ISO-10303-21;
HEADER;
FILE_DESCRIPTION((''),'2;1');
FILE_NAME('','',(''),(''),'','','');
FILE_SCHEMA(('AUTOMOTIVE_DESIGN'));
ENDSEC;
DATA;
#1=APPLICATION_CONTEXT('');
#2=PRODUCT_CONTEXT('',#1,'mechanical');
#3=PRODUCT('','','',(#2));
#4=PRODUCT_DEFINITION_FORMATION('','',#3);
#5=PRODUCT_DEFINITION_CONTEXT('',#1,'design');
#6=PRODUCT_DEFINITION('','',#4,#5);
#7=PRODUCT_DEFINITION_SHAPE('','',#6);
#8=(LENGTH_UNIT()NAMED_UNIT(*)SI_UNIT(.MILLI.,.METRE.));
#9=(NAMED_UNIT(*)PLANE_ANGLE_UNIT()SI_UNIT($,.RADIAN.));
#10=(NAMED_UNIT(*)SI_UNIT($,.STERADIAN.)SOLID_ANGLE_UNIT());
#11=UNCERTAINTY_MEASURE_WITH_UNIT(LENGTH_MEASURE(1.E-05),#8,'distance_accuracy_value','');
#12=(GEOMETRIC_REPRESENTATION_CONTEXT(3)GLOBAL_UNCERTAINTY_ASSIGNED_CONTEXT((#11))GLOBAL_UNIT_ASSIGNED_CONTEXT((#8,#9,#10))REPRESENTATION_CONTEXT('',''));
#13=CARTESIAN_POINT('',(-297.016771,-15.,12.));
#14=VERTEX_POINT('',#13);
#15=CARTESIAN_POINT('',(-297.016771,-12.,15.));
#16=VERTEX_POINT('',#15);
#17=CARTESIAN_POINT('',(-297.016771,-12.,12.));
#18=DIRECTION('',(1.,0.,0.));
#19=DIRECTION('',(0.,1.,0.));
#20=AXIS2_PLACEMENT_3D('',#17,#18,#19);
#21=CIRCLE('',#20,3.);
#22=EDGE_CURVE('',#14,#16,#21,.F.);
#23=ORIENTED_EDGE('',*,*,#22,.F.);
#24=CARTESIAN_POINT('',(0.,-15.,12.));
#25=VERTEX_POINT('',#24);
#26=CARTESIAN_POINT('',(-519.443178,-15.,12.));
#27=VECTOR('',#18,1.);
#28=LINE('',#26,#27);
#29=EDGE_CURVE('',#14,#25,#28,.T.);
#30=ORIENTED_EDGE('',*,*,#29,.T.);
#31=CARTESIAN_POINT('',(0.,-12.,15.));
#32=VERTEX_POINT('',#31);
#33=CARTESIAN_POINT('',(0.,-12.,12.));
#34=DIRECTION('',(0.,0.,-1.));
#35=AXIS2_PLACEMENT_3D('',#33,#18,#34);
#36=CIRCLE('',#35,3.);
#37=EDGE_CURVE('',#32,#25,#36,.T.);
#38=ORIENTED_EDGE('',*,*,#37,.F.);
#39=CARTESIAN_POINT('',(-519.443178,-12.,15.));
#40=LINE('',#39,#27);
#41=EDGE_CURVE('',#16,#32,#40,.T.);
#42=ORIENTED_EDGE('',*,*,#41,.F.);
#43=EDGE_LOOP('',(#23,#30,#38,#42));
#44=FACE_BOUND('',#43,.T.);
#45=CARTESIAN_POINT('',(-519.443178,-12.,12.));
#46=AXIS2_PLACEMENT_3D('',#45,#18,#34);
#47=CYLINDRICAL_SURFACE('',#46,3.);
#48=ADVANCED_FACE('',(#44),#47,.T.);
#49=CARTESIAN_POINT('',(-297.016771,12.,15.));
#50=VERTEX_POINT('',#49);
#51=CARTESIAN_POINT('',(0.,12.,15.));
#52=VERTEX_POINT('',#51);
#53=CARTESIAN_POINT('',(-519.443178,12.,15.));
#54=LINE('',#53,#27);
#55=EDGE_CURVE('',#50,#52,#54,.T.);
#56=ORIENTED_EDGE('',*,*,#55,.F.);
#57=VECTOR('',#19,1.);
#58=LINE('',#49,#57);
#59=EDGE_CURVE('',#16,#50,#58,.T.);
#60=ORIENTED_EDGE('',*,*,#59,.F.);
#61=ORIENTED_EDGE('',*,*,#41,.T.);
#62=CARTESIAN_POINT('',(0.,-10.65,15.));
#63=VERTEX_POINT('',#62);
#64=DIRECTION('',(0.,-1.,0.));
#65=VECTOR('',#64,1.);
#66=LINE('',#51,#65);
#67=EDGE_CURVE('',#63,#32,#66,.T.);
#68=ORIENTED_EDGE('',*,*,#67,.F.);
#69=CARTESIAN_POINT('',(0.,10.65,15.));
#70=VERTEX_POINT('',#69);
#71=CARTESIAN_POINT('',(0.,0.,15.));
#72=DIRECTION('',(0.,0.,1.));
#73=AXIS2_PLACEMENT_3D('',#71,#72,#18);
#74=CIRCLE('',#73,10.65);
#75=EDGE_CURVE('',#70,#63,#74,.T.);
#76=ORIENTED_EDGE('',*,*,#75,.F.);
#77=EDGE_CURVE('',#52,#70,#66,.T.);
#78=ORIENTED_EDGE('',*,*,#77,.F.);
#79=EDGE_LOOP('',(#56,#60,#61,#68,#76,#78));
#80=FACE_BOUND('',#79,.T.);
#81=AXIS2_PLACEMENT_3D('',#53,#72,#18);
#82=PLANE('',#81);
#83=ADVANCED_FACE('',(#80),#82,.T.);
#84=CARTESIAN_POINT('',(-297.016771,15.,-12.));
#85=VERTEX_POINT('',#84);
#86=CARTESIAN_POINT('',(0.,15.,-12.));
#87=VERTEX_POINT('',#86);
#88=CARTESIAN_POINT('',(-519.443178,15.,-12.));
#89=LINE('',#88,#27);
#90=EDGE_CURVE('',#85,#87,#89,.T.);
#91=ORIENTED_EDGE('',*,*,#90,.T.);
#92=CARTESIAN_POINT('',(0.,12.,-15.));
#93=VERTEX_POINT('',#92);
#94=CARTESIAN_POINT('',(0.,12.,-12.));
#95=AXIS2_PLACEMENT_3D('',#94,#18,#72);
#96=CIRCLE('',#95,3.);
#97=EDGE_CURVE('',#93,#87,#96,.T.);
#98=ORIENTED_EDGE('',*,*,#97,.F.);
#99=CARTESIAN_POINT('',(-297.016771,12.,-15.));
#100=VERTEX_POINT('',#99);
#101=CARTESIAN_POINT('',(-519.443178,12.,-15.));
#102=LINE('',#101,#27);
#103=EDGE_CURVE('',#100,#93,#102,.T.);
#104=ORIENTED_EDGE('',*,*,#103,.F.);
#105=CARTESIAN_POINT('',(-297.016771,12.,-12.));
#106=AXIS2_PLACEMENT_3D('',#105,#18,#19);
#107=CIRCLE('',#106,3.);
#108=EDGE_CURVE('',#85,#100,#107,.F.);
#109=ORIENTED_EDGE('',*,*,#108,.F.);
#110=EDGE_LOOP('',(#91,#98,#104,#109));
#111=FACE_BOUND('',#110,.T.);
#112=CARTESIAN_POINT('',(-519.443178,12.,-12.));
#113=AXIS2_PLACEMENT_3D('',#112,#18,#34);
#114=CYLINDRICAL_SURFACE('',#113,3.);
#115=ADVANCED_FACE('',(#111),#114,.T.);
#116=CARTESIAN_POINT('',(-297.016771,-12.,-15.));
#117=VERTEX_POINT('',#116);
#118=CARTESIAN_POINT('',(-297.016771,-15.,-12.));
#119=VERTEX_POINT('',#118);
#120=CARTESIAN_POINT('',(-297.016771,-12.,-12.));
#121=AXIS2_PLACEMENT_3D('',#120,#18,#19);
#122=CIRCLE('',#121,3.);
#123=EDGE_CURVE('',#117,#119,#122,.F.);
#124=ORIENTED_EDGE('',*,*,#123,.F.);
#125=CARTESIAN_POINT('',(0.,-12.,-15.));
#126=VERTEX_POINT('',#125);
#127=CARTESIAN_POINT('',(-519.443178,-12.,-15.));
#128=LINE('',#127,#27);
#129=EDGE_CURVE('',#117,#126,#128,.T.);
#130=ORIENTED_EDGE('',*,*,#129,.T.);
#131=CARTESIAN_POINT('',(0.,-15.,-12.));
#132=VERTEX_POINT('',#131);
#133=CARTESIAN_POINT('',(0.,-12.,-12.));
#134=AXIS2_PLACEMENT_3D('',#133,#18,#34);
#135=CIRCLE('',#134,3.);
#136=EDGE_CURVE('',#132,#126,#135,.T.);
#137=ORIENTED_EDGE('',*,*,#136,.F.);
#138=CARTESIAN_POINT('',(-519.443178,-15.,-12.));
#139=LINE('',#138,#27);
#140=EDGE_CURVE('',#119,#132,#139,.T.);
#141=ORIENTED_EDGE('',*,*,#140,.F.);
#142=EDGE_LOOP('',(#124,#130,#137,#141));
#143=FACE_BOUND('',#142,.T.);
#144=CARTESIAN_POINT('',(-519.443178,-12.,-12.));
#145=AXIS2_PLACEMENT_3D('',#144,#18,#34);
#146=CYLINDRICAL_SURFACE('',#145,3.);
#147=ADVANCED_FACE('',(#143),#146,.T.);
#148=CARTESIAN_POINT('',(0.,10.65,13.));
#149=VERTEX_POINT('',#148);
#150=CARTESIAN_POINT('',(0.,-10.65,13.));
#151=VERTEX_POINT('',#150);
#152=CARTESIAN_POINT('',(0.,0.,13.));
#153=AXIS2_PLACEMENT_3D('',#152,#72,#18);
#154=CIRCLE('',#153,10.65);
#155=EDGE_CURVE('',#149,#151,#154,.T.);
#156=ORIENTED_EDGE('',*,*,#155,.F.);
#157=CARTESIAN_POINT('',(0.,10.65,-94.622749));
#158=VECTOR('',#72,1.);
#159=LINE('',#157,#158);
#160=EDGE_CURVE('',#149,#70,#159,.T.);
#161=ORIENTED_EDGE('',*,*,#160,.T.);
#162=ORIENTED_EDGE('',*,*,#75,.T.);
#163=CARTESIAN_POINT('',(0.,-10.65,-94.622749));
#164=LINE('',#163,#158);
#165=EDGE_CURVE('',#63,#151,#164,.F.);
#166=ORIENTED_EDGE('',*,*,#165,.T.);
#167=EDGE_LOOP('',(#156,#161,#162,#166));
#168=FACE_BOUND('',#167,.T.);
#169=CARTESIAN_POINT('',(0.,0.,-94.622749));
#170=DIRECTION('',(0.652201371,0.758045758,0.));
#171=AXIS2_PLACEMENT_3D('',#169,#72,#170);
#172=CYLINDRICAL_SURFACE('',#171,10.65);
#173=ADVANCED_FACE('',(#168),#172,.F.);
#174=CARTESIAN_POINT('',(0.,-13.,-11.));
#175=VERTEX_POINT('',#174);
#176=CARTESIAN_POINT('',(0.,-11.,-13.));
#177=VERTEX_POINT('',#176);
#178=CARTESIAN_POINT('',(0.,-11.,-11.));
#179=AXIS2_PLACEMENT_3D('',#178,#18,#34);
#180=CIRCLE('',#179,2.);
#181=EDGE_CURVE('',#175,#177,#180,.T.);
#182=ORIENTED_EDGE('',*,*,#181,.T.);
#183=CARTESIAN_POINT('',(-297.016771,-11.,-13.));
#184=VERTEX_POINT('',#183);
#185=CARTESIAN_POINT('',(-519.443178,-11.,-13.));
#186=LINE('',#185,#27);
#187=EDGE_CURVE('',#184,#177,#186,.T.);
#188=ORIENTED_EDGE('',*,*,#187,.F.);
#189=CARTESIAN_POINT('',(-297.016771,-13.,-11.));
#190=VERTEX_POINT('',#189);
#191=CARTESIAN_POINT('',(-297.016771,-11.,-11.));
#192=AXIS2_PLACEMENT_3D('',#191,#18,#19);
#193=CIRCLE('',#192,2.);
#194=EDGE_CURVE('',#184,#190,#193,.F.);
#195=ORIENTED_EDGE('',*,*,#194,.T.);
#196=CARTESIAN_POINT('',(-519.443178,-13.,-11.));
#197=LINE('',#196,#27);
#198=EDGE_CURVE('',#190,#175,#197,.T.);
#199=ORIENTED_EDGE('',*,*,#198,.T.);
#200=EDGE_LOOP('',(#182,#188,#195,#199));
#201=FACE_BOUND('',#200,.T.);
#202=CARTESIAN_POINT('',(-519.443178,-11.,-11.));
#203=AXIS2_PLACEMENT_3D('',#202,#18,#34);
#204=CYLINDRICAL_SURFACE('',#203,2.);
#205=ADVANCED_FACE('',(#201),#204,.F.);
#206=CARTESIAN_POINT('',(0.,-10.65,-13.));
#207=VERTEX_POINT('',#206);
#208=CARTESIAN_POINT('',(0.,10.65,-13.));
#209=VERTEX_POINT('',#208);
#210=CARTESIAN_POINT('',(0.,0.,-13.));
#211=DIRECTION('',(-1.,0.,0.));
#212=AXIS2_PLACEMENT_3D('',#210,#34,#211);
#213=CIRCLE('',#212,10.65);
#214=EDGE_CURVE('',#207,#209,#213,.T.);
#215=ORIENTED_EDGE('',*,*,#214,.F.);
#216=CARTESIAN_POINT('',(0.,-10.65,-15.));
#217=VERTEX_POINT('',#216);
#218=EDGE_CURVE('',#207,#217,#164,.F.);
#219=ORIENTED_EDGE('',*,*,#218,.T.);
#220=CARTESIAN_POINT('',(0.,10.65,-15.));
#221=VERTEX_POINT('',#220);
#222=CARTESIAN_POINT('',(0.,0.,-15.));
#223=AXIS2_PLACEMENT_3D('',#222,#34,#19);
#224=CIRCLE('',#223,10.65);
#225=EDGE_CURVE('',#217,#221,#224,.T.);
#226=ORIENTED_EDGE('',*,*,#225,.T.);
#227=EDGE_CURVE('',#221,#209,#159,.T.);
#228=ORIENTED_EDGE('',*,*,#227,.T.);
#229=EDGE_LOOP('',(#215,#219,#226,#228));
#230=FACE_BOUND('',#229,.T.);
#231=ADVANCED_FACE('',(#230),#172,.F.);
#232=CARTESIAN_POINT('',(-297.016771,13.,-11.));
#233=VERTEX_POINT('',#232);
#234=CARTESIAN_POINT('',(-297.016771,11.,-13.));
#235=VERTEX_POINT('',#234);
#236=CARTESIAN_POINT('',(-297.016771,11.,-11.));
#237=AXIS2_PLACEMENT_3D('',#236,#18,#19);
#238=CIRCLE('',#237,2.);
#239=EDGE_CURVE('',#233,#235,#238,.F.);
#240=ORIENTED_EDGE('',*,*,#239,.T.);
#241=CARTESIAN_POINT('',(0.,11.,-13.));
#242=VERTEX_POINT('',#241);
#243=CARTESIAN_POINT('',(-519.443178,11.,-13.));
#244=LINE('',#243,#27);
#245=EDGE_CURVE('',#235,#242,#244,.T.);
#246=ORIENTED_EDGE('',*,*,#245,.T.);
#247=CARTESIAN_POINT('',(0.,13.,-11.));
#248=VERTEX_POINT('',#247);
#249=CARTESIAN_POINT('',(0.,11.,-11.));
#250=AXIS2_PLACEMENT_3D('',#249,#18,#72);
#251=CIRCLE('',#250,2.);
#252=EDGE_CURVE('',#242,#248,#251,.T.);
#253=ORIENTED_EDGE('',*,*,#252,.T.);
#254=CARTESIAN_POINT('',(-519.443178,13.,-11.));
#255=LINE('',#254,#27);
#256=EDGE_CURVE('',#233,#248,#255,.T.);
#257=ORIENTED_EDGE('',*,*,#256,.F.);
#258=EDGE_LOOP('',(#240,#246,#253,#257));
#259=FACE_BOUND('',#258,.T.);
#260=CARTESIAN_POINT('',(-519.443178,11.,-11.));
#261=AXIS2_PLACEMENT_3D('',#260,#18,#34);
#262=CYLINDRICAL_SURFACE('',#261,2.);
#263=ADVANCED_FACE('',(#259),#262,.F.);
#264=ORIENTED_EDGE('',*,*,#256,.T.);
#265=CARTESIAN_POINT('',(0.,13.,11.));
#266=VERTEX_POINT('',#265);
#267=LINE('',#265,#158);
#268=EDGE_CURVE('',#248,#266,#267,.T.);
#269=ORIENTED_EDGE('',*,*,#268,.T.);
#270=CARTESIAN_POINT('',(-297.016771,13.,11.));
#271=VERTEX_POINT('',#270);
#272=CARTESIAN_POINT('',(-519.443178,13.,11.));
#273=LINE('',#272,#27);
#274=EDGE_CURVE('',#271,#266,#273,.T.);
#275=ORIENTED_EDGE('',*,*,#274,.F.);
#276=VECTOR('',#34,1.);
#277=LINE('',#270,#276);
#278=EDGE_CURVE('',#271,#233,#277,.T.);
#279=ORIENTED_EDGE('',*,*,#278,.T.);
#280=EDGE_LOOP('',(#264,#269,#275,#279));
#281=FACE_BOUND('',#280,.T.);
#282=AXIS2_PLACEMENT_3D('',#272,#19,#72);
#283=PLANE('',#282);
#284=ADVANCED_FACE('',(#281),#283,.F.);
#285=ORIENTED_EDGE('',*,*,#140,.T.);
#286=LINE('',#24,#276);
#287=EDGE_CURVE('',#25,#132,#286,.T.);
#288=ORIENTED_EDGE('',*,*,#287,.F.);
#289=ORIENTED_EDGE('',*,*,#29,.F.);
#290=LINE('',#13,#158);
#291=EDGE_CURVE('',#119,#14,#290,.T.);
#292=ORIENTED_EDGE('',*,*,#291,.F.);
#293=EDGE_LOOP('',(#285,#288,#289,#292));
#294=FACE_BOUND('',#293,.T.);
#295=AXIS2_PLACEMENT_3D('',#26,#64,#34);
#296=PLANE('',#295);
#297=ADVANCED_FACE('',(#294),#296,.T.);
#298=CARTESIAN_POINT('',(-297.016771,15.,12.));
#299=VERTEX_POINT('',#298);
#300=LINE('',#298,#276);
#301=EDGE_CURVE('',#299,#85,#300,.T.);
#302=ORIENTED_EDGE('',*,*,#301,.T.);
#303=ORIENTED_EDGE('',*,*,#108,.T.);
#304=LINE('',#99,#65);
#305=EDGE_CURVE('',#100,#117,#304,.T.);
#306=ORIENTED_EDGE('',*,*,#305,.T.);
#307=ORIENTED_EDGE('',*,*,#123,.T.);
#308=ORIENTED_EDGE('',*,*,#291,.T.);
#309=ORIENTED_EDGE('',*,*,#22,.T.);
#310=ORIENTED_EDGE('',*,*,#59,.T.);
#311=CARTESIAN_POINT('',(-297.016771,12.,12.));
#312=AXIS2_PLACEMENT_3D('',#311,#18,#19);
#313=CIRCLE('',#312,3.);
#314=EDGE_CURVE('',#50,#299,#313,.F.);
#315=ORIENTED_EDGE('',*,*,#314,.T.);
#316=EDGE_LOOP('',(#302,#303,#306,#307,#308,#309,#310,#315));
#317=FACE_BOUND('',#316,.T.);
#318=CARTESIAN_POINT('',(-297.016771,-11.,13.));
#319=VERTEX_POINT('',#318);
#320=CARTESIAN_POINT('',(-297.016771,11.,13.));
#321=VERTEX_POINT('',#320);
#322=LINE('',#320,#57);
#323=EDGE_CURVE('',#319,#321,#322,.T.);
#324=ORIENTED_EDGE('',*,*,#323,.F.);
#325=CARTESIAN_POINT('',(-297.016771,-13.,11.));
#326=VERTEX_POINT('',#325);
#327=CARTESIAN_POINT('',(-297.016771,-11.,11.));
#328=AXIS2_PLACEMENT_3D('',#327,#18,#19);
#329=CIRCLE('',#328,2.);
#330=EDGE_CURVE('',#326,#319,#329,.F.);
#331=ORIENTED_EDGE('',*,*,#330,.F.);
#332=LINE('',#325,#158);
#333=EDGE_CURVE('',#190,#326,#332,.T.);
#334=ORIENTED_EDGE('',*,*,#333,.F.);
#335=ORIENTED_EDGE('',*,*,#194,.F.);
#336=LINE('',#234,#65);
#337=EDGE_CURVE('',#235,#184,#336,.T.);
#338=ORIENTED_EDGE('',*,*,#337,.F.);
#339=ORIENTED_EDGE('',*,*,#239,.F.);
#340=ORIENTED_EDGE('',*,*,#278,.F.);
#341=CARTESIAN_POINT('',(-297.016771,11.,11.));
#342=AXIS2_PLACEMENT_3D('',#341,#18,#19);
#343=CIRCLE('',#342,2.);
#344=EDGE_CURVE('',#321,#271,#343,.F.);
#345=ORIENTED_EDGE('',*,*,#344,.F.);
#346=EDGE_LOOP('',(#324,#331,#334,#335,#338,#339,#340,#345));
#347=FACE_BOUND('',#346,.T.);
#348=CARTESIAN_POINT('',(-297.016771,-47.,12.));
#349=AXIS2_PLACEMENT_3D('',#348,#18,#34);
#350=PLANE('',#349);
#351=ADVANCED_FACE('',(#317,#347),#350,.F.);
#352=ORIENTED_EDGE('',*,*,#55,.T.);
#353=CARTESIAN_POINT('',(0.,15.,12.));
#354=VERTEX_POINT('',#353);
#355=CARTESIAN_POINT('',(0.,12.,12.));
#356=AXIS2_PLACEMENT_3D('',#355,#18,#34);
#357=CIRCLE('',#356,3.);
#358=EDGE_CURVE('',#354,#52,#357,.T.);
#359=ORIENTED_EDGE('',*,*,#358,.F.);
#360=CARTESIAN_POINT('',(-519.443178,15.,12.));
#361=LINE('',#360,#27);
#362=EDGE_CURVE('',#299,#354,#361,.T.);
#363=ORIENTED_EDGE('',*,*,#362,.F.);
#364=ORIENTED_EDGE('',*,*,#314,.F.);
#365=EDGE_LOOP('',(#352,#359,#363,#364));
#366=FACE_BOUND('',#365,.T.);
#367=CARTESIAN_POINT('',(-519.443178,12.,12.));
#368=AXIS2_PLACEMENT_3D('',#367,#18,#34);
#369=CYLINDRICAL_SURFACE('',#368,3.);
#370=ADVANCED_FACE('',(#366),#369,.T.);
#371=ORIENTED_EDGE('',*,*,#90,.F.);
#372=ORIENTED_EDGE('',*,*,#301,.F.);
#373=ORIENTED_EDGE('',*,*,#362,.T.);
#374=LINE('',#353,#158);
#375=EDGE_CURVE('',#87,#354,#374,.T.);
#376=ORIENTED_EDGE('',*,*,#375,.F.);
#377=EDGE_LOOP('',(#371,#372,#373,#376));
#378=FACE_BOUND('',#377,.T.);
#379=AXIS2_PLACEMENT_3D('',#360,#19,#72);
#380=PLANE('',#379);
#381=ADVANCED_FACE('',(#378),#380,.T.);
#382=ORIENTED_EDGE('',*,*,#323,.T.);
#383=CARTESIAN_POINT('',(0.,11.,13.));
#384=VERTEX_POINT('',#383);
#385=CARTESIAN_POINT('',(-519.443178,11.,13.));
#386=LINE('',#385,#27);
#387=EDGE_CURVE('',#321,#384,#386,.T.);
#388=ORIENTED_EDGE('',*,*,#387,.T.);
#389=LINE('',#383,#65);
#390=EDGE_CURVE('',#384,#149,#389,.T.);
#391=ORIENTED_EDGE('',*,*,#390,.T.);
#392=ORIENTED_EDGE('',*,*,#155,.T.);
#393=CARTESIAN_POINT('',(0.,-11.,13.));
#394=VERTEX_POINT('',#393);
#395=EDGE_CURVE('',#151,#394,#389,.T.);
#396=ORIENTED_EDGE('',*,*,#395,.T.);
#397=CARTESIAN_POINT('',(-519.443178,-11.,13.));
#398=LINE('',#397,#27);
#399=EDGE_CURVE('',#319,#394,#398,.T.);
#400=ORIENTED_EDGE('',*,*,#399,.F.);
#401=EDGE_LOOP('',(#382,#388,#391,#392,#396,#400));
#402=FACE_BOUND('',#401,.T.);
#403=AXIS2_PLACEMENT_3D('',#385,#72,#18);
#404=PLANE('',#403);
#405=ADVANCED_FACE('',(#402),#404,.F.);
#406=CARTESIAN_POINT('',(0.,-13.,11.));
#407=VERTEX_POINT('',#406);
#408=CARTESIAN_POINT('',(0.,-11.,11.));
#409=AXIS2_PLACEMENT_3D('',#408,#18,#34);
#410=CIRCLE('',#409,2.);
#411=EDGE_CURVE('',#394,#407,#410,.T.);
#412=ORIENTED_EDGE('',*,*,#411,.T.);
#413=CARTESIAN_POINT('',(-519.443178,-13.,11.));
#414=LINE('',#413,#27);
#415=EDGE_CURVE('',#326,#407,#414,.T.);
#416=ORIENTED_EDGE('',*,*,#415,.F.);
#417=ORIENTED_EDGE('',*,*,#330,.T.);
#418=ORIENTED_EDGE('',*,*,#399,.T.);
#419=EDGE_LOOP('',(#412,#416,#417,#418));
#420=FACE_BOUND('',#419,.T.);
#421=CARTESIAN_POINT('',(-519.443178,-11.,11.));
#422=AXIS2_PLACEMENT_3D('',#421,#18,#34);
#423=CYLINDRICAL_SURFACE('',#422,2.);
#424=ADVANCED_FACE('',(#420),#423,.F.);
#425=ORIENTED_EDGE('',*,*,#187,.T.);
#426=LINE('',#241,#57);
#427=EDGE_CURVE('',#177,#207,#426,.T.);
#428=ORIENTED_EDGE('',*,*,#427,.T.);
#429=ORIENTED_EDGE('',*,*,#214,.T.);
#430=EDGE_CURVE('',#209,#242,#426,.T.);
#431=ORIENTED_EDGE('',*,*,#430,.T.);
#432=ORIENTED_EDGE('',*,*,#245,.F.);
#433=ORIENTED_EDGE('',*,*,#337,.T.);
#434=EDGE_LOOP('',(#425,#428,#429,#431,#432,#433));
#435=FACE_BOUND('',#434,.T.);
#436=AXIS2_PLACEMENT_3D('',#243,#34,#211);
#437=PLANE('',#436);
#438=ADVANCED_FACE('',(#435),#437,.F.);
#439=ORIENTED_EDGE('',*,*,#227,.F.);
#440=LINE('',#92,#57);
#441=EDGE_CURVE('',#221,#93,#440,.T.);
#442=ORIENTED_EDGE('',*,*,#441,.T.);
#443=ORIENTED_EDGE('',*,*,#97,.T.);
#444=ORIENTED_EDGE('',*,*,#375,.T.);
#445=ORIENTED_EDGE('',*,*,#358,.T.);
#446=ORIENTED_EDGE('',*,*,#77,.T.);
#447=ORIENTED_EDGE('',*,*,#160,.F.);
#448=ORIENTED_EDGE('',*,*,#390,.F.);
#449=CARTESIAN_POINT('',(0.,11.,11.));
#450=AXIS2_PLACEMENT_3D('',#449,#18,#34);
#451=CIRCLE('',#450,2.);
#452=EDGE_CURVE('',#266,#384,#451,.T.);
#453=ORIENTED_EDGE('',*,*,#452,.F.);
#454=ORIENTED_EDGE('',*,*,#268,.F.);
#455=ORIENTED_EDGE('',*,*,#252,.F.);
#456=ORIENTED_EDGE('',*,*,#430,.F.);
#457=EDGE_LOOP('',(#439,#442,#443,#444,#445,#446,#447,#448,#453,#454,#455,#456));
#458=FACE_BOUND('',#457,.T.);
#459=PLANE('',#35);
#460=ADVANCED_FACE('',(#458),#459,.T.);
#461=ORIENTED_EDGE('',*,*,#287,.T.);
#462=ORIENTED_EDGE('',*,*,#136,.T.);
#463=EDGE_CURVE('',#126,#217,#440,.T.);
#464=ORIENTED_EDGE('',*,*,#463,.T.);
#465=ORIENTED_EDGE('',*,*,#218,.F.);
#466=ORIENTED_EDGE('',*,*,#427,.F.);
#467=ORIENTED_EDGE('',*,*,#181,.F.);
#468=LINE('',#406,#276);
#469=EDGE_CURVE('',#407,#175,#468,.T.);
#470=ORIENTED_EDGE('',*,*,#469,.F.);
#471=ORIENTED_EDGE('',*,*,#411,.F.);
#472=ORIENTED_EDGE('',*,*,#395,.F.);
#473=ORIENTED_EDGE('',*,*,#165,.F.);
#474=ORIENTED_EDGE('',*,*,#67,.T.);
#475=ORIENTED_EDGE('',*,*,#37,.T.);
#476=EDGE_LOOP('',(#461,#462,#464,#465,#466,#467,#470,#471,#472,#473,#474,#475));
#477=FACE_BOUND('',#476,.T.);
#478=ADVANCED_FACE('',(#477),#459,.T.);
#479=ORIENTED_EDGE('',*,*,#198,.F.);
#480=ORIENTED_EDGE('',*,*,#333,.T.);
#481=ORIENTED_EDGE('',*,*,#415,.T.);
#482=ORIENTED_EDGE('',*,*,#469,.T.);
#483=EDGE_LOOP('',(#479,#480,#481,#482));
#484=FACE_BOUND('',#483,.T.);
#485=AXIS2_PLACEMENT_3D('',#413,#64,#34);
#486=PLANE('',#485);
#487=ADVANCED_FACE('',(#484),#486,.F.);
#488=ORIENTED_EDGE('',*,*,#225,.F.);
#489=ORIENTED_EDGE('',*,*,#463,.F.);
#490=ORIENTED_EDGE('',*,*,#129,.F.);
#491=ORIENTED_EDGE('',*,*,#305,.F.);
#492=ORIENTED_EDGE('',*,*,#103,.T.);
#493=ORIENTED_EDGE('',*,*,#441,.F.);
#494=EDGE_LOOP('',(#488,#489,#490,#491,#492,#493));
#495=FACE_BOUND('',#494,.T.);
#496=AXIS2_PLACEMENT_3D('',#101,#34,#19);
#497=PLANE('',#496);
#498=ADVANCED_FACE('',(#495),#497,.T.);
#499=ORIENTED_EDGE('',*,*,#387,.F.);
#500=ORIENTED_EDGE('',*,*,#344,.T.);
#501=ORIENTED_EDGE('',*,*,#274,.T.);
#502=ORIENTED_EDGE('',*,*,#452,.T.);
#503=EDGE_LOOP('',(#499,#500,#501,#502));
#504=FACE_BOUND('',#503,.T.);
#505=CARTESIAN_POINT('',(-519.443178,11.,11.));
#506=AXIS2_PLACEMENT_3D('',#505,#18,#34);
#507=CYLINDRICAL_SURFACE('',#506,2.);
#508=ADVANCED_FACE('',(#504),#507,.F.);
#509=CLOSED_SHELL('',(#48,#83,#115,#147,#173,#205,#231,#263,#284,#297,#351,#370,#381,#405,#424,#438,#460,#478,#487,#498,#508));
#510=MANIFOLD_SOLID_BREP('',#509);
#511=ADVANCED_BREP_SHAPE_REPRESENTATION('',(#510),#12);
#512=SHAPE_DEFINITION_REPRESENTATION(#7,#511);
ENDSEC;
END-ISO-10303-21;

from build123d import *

# Parameters (mm, degrees)
EXTRUDE_1_DEPTH = 297.016771071
OTHER_START     = -15
OTHER_1_DEPTH   = 30


# Read off the part's stored shape, not the designer's step: Полость1
with BuildPart() as part:
    # Эскиз1 → Бобышка-Вытянуть1 (new body)
    with BuildSketch(Plane(origin=(0, 0, 0), x_dir=(0, 0, -1), z_dir=(1, 0, 0))):
        with BuildLine():
            Line((-12, 15), (12, 15))
            ThreePointArc((12, 15), (14.121320344, 14.121320344), (15, 12))
            Line((15, 12), (15, -12))
            ThreePointArc((15, -12), (14.121320344, -14.121320344), (12, -15))
            Line((12, -15), (-12, -15))
            ThreePointArc((-12, -15), (-14.121320344, -14.121320344), (-15, -12))
            Line((-15, -12), (-15, 12))
            ThreePointArc((-15, 12), (-14.121320344, 14.121320344), (-12, 15))
        make_face()
        with BuildLine():
            Line((-11, 13), (11, 13))
            ThreePointArc((11, 13), (12.414213562, 12.414213562), (13, 11))
            Line((13, 11), (13, -11))
            ThreePointArc((13, -11), (12.414213562, -12.414213562), (11, -13))
            Line((11, -13), (-11, -13))
            ThreePointArc((-11, -13), (-12.414213562, -12.414213562), (-13, -11))
            Line((-13, -11), (-13, 11))
            ThreePointArc((-13, 11), (-12.414213562, 12.414213562), (-11, 13))
        make_face(mode=Mode.SUBTRACT)
    extrude(amount=-EXTRUDE_1_DEPTH)

    # Полость1 outline → Полость1 (cut)
    with BuildSketch(Plane.XY.offset(OTHER_START)):
        with BuildLine():
            Line((0, -10.65), (0, 10.65))
            ThreePointArc((0, 10.65), (-10.65, 0), (0, -10.65))
        make_face()
    extrude(amount=OTHER_1_DEPTH, mode=Mode.SUBTRACT)


solid = part.part
